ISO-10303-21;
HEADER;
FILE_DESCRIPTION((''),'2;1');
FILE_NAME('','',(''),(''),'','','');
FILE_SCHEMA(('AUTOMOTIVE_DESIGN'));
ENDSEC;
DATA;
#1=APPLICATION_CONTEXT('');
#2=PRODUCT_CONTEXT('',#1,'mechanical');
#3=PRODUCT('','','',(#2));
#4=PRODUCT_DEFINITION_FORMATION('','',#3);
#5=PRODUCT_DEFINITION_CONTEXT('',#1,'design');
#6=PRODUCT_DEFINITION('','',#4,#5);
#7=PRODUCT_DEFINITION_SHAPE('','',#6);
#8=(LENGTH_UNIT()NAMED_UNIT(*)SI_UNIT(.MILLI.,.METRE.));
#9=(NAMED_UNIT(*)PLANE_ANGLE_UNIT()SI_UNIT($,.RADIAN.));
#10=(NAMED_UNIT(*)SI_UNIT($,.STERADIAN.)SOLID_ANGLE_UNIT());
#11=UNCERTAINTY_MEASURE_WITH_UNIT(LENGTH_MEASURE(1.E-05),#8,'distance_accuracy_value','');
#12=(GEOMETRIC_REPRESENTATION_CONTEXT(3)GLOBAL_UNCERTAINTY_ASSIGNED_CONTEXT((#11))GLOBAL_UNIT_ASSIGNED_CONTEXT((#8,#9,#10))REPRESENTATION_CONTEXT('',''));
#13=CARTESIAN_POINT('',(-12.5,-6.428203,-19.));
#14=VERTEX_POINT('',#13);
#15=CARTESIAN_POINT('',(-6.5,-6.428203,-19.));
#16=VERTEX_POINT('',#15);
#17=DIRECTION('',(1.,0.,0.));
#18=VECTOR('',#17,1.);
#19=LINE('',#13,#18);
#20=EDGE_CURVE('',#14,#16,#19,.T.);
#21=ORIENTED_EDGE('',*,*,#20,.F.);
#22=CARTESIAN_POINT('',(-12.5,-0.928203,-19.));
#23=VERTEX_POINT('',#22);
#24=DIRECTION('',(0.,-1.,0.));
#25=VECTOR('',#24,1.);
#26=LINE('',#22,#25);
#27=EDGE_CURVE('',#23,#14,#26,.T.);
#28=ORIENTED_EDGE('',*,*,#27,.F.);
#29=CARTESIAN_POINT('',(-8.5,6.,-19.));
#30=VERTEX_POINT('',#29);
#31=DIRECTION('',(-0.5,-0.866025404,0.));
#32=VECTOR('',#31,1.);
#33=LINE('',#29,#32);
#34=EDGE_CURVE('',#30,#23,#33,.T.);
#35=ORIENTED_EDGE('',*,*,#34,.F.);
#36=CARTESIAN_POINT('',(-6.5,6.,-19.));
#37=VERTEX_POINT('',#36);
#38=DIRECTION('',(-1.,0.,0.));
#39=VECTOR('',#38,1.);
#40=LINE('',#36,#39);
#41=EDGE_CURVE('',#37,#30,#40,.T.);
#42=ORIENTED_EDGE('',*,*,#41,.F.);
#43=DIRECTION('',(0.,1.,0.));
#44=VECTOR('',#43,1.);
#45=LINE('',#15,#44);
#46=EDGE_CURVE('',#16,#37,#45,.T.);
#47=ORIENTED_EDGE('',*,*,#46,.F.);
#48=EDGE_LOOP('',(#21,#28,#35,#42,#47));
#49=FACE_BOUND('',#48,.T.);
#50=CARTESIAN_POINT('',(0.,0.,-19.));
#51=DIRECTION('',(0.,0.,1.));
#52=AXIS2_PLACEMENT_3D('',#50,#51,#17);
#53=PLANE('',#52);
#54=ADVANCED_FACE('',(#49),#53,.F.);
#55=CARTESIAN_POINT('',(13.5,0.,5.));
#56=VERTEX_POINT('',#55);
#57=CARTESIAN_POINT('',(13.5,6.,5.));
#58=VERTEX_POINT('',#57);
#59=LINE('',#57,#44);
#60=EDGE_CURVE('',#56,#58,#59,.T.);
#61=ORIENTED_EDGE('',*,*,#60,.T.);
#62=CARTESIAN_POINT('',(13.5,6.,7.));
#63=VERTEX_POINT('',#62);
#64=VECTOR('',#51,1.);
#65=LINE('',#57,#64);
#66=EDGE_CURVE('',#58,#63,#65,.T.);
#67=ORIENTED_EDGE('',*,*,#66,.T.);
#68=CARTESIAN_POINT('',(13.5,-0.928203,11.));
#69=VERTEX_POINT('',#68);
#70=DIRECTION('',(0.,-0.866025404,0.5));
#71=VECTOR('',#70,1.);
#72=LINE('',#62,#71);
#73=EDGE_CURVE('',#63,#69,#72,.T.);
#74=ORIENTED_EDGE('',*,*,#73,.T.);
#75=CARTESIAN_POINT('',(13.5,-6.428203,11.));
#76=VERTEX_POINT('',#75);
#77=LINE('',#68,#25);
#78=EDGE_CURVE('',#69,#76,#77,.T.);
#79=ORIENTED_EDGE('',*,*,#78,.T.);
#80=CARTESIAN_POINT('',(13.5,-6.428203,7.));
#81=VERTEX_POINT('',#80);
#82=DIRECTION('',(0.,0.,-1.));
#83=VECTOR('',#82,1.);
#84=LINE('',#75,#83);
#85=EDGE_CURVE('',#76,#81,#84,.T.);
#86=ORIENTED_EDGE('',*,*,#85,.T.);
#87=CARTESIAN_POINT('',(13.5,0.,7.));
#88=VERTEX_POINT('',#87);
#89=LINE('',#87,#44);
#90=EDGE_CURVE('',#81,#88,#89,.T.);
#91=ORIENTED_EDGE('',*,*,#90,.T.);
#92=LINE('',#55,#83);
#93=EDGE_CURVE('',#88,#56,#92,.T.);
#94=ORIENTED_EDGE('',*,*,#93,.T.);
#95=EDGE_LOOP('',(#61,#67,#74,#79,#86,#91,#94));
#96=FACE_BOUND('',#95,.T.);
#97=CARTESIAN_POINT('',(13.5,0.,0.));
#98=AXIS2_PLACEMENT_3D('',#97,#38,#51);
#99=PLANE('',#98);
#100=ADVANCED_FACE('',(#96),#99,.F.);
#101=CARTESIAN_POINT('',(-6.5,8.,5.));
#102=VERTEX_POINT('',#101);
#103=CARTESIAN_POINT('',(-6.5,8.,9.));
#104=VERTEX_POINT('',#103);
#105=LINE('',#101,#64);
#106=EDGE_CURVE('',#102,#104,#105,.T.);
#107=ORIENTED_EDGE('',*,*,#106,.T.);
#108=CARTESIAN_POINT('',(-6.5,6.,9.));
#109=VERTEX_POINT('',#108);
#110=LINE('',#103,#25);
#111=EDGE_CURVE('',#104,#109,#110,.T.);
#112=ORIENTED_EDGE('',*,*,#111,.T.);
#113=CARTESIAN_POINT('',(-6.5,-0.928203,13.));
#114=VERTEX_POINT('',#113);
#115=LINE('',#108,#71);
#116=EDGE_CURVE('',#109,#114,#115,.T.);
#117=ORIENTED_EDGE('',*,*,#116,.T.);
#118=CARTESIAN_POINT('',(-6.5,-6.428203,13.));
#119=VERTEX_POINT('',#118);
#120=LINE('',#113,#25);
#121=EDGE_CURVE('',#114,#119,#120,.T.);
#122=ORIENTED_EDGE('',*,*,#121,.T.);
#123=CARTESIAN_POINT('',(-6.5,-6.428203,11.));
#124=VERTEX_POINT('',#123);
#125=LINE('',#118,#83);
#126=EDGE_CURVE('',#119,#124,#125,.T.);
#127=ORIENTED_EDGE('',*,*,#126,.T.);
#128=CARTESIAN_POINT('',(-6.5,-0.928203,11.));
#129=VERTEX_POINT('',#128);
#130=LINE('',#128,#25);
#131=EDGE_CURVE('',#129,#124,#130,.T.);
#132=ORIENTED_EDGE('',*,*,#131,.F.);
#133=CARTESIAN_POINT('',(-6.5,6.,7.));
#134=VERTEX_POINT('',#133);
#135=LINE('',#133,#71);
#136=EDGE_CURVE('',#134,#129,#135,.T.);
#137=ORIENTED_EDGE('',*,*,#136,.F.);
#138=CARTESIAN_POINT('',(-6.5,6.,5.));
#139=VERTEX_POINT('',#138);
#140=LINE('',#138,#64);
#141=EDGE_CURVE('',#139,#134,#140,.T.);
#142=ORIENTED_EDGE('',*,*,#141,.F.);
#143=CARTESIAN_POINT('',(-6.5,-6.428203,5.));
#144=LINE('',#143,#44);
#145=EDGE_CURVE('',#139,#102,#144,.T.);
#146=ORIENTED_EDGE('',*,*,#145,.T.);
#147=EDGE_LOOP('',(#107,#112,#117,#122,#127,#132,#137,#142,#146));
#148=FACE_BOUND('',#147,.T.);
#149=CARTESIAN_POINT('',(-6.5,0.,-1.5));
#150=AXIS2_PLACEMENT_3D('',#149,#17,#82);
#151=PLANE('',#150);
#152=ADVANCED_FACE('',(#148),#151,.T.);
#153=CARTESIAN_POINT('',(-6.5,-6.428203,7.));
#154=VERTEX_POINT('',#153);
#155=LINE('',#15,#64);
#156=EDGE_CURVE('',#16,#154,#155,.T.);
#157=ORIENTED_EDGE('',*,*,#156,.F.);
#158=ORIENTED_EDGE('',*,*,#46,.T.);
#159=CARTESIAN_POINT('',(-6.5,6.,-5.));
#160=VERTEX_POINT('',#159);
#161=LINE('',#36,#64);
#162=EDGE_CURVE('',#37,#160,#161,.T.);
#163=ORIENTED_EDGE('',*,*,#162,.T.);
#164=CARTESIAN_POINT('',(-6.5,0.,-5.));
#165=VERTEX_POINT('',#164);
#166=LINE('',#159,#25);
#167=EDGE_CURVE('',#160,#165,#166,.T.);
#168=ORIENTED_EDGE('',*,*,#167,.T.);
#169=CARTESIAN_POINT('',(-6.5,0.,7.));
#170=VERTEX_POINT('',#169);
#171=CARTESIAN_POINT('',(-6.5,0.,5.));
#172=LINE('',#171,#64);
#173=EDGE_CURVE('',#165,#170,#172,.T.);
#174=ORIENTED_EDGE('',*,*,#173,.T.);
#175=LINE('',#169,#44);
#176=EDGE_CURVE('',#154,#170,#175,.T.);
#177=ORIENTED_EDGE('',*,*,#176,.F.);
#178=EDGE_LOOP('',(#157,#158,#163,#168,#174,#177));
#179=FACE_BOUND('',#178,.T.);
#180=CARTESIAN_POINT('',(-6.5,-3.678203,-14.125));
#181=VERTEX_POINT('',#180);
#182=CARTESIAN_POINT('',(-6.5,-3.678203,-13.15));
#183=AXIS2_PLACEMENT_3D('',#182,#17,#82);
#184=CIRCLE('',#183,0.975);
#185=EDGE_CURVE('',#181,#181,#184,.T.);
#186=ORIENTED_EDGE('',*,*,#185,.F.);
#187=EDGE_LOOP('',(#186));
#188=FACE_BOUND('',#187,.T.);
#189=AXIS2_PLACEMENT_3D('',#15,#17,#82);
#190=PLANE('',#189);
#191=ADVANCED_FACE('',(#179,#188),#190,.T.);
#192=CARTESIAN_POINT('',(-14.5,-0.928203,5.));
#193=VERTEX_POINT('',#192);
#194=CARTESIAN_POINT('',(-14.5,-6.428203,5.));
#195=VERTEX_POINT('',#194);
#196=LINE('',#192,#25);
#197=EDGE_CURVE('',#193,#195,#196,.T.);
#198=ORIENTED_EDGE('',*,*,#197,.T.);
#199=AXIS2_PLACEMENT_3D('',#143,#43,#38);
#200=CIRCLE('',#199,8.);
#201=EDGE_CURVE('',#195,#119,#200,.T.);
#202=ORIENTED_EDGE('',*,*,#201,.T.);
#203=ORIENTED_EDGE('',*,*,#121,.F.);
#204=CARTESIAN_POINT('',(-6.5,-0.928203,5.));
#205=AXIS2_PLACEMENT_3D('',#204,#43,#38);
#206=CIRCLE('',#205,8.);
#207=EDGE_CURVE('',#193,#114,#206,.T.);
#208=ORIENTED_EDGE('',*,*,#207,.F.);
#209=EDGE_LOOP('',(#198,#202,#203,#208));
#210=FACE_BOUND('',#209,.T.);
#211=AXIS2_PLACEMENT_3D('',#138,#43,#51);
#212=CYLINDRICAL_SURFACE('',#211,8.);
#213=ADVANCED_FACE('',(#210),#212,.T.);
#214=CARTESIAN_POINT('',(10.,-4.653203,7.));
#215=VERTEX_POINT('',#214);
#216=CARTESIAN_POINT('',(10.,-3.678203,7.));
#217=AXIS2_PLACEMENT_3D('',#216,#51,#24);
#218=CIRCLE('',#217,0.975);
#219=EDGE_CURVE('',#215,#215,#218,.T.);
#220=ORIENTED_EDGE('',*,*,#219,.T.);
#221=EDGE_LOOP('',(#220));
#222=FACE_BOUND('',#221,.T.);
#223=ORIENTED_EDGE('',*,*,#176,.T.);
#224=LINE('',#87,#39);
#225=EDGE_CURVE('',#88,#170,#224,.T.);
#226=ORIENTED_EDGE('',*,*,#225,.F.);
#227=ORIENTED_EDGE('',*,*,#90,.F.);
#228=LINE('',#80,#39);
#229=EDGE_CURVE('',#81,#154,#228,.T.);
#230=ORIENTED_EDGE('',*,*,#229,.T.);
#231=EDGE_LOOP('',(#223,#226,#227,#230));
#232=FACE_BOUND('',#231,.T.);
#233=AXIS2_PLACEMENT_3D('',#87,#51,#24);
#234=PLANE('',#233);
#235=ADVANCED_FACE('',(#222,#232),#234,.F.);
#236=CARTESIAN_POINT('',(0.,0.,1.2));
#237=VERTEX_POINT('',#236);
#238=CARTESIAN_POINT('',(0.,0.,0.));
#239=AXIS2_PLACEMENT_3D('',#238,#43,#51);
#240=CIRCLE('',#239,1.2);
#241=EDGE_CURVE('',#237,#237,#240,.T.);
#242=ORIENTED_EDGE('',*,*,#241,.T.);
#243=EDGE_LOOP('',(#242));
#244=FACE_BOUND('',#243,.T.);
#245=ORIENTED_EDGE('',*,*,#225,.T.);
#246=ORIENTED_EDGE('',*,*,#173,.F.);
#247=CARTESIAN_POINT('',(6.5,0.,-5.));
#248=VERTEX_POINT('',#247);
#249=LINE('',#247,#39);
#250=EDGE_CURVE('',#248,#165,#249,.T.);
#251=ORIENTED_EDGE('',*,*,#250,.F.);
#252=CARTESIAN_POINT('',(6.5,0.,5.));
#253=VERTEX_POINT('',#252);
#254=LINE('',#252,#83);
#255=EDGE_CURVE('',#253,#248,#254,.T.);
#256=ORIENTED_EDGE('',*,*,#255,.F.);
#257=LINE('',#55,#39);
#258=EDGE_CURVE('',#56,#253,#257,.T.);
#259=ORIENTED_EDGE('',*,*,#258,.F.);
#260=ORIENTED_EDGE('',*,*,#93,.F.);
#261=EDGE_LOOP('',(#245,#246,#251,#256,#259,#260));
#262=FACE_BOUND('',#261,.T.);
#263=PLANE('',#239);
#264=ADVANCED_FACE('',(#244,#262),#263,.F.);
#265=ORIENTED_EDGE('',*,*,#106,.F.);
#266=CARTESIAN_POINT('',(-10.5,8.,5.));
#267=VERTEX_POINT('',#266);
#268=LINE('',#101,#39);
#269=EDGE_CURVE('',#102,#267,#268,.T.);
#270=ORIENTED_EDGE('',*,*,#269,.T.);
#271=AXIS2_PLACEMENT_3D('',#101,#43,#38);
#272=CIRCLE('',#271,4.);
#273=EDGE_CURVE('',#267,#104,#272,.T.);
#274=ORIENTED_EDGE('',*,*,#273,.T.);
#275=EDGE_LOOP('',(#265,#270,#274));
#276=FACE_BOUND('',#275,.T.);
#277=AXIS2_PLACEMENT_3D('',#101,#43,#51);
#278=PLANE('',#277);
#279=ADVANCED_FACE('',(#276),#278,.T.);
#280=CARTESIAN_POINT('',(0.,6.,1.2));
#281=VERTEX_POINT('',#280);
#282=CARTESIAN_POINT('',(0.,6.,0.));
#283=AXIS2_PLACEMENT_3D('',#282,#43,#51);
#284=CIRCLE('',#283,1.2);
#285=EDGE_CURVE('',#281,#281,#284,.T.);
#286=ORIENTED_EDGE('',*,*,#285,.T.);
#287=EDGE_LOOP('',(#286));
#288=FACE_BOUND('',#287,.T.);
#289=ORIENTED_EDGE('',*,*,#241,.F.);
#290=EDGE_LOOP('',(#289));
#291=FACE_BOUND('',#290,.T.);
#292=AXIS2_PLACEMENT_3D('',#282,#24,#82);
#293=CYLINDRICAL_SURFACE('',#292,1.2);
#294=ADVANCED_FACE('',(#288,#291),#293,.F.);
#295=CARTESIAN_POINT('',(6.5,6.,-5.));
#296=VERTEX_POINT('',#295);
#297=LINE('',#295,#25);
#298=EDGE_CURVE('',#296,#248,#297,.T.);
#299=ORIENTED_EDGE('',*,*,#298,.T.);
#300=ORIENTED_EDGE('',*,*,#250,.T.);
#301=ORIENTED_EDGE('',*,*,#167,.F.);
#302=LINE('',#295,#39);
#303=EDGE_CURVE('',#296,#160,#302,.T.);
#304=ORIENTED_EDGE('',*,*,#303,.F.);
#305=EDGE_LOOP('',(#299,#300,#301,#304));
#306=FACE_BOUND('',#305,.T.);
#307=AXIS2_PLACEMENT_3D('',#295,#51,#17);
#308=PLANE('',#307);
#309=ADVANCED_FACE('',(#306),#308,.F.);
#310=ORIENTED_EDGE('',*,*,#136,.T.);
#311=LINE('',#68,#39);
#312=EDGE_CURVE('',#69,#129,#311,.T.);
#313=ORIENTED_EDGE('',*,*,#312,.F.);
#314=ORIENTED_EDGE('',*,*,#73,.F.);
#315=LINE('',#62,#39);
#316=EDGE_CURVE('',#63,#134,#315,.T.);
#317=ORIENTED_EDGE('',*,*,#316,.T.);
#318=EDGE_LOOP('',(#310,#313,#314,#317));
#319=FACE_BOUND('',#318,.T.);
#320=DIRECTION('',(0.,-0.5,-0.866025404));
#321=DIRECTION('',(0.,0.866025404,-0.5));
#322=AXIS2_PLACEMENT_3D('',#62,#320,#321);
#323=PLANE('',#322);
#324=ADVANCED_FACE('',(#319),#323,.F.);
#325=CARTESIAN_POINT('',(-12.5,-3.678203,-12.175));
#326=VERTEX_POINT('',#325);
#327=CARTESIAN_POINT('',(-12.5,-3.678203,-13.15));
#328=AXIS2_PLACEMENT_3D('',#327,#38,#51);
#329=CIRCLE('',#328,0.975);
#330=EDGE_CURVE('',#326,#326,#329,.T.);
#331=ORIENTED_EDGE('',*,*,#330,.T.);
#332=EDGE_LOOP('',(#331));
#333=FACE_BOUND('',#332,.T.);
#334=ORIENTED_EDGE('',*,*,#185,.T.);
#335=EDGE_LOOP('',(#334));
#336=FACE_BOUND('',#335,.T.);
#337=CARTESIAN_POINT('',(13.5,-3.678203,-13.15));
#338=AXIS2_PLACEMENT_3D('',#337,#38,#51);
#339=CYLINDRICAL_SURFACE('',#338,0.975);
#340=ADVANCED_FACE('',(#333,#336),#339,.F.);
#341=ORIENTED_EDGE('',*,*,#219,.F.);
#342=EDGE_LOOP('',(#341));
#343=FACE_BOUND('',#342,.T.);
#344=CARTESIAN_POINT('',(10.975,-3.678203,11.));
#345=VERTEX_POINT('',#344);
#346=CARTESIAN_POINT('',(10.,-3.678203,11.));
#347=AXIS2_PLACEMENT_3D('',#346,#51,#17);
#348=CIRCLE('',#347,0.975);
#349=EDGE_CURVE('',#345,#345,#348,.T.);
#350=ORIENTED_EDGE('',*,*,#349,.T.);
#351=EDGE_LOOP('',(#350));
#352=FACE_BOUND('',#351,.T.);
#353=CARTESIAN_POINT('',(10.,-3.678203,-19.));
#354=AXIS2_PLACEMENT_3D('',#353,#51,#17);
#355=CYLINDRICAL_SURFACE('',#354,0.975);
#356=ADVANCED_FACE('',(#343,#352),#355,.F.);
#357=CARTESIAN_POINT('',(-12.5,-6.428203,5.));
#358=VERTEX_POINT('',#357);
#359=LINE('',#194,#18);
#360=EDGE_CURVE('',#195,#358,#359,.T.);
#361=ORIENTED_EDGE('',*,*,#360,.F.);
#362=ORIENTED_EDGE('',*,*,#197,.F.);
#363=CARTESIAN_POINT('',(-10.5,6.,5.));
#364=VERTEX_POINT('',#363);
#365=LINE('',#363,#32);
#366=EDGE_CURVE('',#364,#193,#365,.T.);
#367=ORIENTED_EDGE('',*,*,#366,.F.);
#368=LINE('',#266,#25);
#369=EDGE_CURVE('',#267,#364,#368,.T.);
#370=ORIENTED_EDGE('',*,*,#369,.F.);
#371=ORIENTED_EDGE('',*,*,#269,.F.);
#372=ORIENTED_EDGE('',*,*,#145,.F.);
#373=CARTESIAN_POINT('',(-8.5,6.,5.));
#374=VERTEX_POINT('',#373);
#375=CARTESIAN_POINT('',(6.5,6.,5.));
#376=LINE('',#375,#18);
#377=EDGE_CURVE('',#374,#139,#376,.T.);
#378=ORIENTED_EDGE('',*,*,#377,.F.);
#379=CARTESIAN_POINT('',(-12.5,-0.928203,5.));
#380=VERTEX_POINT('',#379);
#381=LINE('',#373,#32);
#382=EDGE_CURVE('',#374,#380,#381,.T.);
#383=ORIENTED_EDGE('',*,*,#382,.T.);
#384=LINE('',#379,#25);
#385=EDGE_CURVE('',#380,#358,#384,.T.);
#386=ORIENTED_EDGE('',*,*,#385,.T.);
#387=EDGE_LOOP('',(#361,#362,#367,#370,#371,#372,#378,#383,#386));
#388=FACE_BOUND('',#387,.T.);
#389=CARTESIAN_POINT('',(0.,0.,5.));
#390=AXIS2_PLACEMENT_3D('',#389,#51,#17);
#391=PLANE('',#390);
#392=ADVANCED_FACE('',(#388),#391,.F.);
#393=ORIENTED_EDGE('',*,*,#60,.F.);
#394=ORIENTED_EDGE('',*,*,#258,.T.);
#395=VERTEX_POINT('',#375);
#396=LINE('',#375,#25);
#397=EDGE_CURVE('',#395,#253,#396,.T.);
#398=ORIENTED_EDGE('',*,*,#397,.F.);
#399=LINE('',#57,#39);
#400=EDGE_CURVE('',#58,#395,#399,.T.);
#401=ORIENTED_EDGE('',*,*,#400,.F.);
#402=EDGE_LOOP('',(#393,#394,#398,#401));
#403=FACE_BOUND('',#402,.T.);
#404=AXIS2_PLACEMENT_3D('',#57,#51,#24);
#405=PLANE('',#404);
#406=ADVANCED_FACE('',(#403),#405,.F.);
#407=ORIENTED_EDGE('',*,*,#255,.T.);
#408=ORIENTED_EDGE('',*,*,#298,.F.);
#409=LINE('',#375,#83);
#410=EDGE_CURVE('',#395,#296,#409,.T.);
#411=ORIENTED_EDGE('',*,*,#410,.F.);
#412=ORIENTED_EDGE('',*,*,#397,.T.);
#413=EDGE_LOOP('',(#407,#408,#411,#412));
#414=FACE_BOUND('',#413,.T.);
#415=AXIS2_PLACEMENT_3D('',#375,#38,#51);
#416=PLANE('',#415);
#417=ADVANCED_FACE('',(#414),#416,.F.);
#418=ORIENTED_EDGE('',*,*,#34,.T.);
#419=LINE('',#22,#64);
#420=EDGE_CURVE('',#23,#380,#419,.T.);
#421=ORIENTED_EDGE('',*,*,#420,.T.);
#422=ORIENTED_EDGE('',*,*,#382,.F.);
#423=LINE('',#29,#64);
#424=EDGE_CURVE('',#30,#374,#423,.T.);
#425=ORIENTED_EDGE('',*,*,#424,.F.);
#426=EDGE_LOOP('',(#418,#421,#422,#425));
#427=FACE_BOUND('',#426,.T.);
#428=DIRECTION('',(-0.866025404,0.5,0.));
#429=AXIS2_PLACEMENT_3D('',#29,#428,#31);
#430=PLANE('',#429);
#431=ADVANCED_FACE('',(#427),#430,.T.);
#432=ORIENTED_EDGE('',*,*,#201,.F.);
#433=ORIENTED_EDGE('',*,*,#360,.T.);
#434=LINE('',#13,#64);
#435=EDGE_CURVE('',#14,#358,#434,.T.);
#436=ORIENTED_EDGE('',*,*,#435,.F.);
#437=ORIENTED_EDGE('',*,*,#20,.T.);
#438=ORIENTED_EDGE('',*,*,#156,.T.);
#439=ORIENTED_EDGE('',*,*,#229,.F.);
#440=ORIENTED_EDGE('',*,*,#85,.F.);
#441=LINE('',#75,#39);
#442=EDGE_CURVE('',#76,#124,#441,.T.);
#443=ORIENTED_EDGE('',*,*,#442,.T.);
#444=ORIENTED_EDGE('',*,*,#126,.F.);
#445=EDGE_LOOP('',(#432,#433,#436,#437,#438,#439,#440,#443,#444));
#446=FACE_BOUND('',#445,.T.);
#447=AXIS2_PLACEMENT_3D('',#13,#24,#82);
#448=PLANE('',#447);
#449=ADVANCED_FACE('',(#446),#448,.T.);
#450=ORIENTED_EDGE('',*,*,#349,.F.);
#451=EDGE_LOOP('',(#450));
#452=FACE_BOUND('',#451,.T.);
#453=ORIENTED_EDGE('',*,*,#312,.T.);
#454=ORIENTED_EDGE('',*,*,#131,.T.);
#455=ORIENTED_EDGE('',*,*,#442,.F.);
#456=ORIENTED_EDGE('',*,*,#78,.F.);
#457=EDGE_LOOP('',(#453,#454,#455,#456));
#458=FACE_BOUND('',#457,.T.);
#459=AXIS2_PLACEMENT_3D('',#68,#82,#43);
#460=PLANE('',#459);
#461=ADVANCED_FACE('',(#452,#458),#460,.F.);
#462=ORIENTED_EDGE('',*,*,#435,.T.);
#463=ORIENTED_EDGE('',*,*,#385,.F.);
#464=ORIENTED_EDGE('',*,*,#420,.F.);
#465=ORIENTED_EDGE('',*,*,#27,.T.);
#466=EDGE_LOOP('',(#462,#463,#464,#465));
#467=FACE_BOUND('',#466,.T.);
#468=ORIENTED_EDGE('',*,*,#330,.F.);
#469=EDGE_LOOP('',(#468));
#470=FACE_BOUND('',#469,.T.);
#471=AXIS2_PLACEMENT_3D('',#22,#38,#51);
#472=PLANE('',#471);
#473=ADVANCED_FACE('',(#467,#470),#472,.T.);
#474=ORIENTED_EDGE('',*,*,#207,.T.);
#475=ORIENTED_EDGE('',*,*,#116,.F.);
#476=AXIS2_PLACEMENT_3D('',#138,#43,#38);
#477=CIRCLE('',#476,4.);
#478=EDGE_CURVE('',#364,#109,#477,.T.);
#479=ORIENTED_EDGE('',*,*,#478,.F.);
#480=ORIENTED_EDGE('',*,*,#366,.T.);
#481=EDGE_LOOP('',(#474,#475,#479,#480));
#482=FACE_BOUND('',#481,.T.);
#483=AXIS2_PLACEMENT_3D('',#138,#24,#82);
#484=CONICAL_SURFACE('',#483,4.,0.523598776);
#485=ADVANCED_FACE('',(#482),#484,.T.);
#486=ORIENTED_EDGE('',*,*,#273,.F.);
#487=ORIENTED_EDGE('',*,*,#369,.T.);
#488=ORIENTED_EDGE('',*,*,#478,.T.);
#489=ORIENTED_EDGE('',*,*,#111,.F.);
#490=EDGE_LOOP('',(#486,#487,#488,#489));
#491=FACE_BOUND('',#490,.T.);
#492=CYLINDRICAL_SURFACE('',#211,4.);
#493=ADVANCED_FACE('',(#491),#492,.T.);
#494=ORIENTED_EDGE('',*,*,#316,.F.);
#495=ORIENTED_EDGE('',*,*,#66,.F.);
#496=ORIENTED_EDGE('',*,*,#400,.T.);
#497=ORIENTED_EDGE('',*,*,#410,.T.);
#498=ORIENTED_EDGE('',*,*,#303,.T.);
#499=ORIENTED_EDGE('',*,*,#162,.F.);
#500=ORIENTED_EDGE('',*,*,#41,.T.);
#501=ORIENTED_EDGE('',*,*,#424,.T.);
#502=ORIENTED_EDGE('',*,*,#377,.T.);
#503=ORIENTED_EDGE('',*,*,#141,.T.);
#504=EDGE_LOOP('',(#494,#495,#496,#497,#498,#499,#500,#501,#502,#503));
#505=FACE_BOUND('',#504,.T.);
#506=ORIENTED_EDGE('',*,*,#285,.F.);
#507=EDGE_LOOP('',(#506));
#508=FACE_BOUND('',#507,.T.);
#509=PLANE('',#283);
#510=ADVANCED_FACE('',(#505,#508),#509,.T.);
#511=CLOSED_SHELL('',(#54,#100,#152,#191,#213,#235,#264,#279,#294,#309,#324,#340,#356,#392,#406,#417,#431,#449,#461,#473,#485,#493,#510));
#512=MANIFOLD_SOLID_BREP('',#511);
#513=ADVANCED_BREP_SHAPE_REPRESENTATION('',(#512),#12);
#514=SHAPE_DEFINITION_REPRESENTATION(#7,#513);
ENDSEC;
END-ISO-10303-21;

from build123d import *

# Parameters (mm, degrees)
SKETCH_1_W               = 13
SKETCH_1_H               = 10
SKETCH_1_R               = 1.2
EXTRUDE_1_DEPTH          = 6
EXTRUDE_2_DEPTH          = 24
EXTRUDE_7_DEPTH          = 20
CUT_EXTRUDE_1_DEPTH      = 33.837810475
CUT_EXTRUDE_1_DEPTH_BACK = 33.837810475
SKETCH_5_R               = 0.975
SKETCH_6_R               = 0.975
CUT_EXTRUDE_2_DEPTH      = 34.519722504
SWEEP_1_ANGLE            = 90


# Read off the part's stored shape, not the designer's step: ｽｲｰﾌﾟ1
with BuildPart() as part:
    # ｽｹｯﾁ1 → ﾎﾞｽ - 押し出し1 (new body)
    with BuildSketch(Plane(origin=(0, 0, 0), x_dir=(1, 0, 0), z_dir=(0, 1, 0))):
        Rectangle(SKETCH_1_W, SKETCH_1_H)
        with Locations(Location((0, 0, 0), (0, 0, 270))):
            Circle(SKETCH_1_R, mode=Mode.SUBTRACT)
    extrude(amount=EXTRUDE_1_DEPTH)

    # ｽｹｯﾁ2 → ﾎﾞｽ - 押し出し2 (add)
    with BuildSketch(Plane.XY.offset(5)):
        Polygon((-6.5, 6), (-8.5, 6), (-12.5, -0.92820323), (-12.5, -6.42820323), (-6.5, -6.42820323), align=None)
    extrude(amount=-EXTRUDE_2_DEPTH)

    # ｽｹｯﾁ4 → ﾎﾞｽ - 押し出し7 (add)
    with BuildSketch(Plane(origin=(-6.5, 0, 0), x_dir=(0, 0, -1), z_dir=(1, 0, 0))):
        Polygon((-5, 6), (-7, 6), (-11, -0.92820323), (-11, -6.42820323), (-7, -6.42820323), (-7, 0), (-5, 0), align=None)
    extrude(amount=EXTRUDE_7_DEPTH)

    # ｽｹｯﾁ5 → ｶｯﾄ - 押し出し1 (cut, two sides: drawn at the far end of the back side and taken through both)
    with BuildSketch(Plane.ZY.offset(12.5).offset(-CUT_EXTRUDE_1_DEPTH_BACK)):
        with Locations((-13.15, -3.67820323)):
            Circle(SKETCH_5_R)
    extrude(amount=CUT_EXTRUDE_1_DEPTH + CUT_EXTRUDE_1_DEPTH_BACK, mode=Mode.SUBTRACT)

    # ｽｹｯﾁ6 → ｶｯﾄ - 押し出し2 (cut, through all)
    with BuildSketch(Plane.XY.offset(11)):
        with Locations((10, -3.67820323)):
            Circle(SKETCH_6_R)
    extrude(amount=-CUT_EXTRUDE_2_DEPTH, mode=Mode.SUBTRACT)

    # ｽｲｰﾌﾟ1 outline → ｽｲｰﾌﾟ1 (revolve)
    with BuildSketch(Plane(origin=(-6.5, 0, 5), x_dir=(-1, 0, 0), z_dir=(0, 0, -1))):
        Polygon((0, 8), (0, -6.42820323), (8, -6.42820323), (8, -0.92820323), (4, 6), (4, 8), align=None)
    revolve(axis=Axis((-6.5, 0, 5), (0, 1, 0)), revolution_arc=SWEEP_1_ANGLE)


solid = part.part
